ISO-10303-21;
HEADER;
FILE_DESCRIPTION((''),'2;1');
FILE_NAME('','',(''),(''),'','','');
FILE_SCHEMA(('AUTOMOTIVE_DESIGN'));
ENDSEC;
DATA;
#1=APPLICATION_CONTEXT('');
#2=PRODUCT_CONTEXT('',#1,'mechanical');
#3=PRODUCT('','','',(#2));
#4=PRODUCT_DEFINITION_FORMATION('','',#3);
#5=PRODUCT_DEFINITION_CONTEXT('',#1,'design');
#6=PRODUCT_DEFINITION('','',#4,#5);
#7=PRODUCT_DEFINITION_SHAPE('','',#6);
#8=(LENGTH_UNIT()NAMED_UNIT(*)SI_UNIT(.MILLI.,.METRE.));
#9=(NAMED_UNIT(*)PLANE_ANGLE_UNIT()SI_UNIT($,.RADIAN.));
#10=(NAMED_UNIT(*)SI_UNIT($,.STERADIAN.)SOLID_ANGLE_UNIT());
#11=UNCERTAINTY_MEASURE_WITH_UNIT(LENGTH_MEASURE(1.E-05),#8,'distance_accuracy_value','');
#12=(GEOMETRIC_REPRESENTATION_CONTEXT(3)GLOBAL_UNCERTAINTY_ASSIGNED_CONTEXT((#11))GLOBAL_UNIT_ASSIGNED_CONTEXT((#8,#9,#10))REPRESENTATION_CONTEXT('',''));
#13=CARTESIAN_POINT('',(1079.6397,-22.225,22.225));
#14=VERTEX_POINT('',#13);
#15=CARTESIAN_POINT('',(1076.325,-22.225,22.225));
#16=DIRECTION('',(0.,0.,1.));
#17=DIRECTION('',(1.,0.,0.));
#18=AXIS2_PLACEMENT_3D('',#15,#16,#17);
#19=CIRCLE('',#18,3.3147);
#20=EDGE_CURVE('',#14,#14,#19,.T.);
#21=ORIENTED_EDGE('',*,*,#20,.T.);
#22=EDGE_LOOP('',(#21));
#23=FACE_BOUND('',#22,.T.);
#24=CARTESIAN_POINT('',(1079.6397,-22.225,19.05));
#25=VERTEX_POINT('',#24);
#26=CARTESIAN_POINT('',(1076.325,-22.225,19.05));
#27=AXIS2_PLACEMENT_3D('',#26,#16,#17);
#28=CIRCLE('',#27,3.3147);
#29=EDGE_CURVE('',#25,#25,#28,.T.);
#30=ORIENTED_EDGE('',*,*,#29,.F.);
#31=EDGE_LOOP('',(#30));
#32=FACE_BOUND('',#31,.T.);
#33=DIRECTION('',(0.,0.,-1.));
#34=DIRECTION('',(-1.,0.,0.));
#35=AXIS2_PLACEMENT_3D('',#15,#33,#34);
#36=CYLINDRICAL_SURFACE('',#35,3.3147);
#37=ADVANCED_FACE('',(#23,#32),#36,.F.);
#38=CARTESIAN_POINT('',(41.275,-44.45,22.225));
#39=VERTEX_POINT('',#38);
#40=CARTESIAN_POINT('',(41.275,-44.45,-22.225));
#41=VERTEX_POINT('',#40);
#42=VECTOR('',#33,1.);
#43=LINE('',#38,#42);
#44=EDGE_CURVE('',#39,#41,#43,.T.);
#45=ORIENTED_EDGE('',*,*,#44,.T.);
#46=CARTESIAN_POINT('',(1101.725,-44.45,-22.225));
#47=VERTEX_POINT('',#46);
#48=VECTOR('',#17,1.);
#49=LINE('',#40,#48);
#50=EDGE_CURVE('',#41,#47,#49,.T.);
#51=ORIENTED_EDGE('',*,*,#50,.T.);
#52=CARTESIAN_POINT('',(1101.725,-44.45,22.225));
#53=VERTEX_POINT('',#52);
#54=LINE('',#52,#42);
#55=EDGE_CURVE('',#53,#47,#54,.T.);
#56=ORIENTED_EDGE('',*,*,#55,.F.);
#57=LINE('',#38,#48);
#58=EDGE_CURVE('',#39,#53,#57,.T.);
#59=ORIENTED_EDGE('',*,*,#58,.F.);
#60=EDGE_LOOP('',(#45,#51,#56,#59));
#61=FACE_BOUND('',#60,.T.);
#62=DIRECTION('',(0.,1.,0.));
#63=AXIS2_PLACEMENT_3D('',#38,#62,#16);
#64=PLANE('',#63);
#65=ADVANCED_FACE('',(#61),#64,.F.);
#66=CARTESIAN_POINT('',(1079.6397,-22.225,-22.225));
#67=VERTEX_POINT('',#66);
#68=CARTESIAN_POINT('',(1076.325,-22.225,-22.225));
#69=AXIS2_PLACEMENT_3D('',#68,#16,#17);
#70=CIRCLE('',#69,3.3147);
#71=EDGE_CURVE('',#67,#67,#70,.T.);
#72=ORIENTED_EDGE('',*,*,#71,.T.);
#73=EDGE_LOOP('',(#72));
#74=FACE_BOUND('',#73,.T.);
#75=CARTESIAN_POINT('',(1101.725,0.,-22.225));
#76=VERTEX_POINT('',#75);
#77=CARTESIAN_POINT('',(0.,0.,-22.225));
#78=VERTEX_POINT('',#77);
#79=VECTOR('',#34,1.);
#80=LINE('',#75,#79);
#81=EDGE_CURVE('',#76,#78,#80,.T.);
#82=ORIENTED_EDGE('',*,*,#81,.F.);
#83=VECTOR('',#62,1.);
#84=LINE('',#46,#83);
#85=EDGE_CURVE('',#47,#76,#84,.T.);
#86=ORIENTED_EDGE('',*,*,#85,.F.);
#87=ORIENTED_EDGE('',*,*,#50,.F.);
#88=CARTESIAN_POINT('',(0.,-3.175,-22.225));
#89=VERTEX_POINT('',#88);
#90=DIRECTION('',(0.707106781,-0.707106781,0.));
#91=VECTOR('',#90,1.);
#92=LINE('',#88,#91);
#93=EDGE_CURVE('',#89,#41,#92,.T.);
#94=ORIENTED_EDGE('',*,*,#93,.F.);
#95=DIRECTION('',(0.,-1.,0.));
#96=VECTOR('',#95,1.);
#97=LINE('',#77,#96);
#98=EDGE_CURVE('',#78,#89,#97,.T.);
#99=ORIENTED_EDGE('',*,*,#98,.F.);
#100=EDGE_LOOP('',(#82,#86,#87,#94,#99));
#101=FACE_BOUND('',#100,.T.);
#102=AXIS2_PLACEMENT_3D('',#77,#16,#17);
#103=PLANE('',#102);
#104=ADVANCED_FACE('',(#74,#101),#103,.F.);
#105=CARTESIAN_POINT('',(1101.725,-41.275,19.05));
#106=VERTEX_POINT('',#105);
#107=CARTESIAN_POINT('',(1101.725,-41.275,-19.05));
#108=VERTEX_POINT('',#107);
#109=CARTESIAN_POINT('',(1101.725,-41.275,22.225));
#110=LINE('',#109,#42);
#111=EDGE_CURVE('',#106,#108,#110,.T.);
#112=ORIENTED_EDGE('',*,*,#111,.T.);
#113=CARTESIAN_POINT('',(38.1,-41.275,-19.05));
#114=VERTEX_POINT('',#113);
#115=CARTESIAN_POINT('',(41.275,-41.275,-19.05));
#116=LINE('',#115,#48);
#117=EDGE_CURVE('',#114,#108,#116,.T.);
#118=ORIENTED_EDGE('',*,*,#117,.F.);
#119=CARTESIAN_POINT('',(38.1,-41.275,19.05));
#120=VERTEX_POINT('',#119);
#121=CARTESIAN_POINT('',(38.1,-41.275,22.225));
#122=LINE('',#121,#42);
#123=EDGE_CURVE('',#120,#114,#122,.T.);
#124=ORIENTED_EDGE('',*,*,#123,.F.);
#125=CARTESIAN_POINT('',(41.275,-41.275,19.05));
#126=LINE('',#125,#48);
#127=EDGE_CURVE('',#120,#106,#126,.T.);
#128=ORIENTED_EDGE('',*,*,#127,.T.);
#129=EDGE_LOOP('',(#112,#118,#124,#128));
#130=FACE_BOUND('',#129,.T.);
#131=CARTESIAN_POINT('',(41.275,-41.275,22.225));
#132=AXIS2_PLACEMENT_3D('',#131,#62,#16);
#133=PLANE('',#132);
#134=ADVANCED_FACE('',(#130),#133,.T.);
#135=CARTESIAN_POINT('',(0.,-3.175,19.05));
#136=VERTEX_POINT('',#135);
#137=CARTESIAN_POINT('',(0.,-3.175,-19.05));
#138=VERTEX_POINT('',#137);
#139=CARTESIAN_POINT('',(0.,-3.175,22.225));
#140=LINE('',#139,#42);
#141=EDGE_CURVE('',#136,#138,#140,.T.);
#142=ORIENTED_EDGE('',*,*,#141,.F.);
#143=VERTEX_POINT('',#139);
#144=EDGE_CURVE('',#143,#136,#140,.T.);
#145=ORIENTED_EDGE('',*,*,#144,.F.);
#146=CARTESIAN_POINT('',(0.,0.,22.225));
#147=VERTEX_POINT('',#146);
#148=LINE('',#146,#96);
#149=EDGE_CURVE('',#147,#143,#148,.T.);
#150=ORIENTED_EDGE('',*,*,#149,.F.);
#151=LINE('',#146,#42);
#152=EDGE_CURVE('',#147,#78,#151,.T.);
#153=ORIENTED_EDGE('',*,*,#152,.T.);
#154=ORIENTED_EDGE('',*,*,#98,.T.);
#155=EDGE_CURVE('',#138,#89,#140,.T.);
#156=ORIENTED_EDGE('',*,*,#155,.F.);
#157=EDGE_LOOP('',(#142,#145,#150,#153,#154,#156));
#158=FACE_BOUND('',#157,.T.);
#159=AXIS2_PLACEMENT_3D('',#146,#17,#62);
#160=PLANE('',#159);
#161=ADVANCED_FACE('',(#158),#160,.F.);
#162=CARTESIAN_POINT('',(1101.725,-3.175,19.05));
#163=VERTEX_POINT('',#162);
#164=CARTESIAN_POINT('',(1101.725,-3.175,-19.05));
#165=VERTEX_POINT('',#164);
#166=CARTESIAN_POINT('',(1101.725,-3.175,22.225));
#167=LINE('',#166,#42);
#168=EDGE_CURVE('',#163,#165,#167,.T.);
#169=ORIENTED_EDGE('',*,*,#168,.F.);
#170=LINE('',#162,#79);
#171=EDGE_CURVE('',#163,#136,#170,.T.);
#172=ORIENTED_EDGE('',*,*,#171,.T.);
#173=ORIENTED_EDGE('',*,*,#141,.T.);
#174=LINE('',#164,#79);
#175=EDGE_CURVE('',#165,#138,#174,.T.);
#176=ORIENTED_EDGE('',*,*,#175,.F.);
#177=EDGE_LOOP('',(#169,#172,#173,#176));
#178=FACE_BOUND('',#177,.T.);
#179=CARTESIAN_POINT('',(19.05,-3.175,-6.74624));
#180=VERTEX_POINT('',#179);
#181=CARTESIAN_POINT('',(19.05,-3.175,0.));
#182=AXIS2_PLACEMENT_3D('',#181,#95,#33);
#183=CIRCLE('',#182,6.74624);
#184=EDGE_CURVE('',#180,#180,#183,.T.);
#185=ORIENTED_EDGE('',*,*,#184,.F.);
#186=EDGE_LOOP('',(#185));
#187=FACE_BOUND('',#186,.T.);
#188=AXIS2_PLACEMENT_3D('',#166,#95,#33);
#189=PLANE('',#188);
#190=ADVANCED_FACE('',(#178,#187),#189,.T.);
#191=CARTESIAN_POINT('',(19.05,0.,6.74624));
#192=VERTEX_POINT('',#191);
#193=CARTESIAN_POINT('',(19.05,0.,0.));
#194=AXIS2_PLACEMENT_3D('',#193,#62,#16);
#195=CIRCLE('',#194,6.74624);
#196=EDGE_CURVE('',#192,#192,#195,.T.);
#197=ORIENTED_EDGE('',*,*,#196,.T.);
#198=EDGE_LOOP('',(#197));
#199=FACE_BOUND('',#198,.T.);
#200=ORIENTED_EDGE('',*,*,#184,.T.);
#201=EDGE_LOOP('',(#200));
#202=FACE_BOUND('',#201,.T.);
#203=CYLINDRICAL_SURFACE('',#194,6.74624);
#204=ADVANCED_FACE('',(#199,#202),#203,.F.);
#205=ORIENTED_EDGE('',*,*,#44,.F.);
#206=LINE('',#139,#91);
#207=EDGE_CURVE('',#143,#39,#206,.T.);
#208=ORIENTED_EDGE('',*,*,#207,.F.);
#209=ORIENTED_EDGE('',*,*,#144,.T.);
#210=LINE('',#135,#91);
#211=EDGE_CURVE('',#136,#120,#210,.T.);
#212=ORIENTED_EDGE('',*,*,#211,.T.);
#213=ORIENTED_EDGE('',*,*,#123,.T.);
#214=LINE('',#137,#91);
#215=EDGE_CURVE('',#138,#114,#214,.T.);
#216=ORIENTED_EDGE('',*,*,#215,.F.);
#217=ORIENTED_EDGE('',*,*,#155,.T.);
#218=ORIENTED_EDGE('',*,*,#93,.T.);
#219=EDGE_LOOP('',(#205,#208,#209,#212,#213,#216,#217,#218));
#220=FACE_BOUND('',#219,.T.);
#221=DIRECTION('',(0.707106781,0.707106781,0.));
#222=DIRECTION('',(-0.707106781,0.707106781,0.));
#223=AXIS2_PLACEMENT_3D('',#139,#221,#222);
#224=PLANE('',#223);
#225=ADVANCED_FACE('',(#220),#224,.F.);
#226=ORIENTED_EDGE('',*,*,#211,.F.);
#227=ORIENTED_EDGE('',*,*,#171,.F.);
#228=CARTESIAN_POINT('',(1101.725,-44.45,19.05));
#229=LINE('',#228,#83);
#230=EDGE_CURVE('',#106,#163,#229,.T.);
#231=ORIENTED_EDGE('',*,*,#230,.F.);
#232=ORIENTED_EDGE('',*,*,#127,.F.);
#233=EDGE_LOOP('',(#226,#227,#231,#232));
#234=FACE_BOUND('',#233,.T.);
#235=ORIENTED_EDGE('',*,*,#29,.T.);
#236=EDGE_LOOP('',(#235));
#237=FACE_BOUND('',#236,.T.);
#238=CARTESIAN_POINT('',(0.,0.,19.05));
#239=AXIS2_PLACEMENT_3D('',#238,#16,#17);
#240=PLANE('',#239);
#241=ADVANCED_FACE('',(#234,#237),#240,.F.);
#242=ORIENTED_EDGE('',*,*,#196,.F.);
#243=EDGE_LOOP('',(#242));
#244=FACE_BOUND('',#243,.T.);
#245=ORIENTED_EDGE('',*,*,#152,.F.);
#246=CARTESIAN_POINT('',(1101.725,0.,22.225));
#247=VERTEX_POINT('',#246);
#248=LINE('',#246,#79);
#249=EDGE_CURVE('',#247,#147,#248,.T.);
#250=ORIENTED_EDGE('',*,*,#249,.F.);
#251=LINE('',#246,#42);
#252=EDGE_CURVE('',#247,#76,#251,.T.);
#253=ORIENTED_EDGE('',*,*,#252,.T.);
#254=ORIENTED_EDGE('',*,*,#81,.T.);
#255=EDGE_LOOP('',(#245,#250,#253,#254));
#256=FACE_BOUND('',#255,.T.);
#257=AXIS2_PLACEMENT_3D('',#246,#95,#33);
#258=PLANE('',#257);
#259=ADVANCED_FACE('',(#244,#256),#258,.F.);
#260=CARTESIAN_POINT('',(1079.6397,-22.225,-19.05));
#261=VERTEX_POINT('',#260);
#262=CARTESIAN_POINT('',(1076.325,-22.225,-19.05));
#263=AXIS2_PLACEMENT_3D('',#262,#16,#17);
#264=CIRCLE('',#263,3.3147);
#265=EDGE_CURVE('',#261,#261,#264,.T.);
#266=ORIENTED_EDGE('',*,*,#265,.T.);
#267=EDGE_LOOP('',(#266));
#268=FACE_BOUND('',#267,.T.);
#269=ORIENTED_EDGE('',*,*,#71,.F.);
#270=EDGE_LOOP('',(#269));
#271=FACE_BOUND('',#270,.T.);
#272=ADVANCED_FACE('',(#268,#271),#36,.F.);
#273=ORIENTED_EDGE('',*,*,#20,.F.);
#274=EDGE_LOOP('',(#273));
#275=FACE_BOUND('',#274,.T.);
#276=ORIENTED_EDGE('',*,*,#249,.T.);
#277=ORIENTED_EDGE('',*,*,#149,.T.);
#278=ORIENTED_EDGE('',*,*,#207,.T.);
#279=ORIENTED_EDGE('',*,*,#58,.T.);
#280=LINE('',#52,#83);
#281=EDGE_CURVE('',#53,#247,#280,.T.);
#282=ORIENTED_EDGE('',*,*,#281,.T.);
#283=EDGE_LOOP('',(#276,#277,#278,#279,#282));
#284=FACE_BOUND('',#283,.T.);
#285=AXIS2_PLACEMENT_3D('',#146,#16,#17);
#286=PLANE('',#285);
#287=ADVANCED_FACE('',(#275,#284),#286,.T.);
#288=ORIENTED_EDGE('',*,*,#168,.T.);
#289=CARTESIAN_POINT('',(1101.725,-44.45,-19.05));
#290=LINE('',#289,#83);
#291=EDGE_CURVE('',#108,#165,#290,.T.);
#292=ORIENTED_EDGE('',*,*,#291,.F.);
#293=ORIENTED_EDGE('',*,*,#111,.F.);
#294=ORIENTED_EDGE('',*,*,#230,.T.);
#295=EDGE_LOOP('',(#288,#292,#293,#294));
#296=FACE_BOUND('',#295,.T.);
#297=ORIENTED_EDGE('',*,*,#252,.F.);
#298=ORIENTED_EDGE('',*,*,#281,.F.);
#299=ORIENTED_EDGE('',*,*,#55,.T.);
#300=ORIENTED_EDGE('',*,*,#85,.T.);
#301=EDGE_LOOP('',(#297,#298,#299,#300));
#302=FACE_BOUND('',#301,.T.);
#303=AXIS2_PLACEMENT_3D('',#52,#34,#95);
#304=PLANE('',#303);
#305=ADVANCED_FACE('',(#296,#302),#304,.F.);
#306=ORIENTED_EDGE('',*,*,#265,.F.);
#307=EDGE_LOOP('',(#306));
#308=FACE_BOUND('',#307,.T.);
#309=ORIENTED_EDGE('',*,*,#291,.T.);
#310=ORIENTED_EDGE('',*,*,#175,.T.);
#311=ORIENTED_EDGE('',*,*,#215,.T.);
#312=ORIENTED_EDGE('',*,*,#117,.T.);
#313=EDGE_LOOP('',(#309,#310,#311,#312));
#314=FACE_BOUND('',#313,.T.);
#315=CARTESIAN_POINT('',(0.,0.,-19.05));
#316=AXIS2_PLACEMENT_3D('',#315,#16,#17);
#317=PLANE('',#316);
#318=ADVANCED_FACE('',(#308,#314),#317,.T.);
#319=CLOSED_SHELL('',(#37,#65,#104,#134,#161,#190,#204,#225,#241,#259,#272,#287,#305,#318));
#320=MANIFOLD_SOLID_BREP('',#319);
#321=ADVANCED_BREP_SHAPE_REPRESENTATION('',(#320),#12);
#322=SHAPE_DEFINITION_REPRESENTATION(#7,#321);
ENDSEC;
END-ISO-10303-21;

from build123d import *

# Parameters (mm, degrees)
SKETCH1_R               = 3.3147
BOSS_EXTRUDE1_DEPTH     = 22.225
SHELL1_START            = -19.05
SHELL1_OUTLINE_R        = 3.3147
SHELL1_DEPTH            = 38.1
F_1_2_CLEARANCE_HOLE1_D = 13.49248


# Read off the part's stored shape, not the designer's step: Shell1
with BuildPart() as part:
    # Sketch1 → Boss-Extrude1 (new, symmetric)
    with BuildSketch(Plane.XY):
        Polygon((41.275, -44.45), (1101.725, -44.45), (1101.725, 0), (0, 0), (0, -3.175), align=None)
        with Locations((1076.325, -22.225)):
            Circle(SKETCH1_R, mode=Mode.SUBTRACT)
    extrude(amount=BOSS_EXTRUDE1_DEPTH, both=True)

    # Shell1 outline → Shell1 (cut)
    with BuildSketch(Plane.XY.offset(SHELL1_START)):
        Polygon((38.1, -41.275), (1101.725, -41.275), (1101.725, -3.175), (0, -3.175), align=None)
        with Locations((1076.325, -22.225)):
            Circle(SHELL1_OUTLINE_R, mode=Mode.SUBTRACT)
    extrude(amount=SHELL1_DEPTH, mode=Mode.SUBTRACT)

    # 1/2 Clearance Hole1 (through all)
    with Locations(Plane(origin=(0, 0, 0), x_dir=(1, 0, 0), z_dir=(0, 1, 0))):
        with Locations((19.05, 0)):
            Hole(F_1_2_CLEARANCE_HOLE1_D / 2)


solid = part.part
